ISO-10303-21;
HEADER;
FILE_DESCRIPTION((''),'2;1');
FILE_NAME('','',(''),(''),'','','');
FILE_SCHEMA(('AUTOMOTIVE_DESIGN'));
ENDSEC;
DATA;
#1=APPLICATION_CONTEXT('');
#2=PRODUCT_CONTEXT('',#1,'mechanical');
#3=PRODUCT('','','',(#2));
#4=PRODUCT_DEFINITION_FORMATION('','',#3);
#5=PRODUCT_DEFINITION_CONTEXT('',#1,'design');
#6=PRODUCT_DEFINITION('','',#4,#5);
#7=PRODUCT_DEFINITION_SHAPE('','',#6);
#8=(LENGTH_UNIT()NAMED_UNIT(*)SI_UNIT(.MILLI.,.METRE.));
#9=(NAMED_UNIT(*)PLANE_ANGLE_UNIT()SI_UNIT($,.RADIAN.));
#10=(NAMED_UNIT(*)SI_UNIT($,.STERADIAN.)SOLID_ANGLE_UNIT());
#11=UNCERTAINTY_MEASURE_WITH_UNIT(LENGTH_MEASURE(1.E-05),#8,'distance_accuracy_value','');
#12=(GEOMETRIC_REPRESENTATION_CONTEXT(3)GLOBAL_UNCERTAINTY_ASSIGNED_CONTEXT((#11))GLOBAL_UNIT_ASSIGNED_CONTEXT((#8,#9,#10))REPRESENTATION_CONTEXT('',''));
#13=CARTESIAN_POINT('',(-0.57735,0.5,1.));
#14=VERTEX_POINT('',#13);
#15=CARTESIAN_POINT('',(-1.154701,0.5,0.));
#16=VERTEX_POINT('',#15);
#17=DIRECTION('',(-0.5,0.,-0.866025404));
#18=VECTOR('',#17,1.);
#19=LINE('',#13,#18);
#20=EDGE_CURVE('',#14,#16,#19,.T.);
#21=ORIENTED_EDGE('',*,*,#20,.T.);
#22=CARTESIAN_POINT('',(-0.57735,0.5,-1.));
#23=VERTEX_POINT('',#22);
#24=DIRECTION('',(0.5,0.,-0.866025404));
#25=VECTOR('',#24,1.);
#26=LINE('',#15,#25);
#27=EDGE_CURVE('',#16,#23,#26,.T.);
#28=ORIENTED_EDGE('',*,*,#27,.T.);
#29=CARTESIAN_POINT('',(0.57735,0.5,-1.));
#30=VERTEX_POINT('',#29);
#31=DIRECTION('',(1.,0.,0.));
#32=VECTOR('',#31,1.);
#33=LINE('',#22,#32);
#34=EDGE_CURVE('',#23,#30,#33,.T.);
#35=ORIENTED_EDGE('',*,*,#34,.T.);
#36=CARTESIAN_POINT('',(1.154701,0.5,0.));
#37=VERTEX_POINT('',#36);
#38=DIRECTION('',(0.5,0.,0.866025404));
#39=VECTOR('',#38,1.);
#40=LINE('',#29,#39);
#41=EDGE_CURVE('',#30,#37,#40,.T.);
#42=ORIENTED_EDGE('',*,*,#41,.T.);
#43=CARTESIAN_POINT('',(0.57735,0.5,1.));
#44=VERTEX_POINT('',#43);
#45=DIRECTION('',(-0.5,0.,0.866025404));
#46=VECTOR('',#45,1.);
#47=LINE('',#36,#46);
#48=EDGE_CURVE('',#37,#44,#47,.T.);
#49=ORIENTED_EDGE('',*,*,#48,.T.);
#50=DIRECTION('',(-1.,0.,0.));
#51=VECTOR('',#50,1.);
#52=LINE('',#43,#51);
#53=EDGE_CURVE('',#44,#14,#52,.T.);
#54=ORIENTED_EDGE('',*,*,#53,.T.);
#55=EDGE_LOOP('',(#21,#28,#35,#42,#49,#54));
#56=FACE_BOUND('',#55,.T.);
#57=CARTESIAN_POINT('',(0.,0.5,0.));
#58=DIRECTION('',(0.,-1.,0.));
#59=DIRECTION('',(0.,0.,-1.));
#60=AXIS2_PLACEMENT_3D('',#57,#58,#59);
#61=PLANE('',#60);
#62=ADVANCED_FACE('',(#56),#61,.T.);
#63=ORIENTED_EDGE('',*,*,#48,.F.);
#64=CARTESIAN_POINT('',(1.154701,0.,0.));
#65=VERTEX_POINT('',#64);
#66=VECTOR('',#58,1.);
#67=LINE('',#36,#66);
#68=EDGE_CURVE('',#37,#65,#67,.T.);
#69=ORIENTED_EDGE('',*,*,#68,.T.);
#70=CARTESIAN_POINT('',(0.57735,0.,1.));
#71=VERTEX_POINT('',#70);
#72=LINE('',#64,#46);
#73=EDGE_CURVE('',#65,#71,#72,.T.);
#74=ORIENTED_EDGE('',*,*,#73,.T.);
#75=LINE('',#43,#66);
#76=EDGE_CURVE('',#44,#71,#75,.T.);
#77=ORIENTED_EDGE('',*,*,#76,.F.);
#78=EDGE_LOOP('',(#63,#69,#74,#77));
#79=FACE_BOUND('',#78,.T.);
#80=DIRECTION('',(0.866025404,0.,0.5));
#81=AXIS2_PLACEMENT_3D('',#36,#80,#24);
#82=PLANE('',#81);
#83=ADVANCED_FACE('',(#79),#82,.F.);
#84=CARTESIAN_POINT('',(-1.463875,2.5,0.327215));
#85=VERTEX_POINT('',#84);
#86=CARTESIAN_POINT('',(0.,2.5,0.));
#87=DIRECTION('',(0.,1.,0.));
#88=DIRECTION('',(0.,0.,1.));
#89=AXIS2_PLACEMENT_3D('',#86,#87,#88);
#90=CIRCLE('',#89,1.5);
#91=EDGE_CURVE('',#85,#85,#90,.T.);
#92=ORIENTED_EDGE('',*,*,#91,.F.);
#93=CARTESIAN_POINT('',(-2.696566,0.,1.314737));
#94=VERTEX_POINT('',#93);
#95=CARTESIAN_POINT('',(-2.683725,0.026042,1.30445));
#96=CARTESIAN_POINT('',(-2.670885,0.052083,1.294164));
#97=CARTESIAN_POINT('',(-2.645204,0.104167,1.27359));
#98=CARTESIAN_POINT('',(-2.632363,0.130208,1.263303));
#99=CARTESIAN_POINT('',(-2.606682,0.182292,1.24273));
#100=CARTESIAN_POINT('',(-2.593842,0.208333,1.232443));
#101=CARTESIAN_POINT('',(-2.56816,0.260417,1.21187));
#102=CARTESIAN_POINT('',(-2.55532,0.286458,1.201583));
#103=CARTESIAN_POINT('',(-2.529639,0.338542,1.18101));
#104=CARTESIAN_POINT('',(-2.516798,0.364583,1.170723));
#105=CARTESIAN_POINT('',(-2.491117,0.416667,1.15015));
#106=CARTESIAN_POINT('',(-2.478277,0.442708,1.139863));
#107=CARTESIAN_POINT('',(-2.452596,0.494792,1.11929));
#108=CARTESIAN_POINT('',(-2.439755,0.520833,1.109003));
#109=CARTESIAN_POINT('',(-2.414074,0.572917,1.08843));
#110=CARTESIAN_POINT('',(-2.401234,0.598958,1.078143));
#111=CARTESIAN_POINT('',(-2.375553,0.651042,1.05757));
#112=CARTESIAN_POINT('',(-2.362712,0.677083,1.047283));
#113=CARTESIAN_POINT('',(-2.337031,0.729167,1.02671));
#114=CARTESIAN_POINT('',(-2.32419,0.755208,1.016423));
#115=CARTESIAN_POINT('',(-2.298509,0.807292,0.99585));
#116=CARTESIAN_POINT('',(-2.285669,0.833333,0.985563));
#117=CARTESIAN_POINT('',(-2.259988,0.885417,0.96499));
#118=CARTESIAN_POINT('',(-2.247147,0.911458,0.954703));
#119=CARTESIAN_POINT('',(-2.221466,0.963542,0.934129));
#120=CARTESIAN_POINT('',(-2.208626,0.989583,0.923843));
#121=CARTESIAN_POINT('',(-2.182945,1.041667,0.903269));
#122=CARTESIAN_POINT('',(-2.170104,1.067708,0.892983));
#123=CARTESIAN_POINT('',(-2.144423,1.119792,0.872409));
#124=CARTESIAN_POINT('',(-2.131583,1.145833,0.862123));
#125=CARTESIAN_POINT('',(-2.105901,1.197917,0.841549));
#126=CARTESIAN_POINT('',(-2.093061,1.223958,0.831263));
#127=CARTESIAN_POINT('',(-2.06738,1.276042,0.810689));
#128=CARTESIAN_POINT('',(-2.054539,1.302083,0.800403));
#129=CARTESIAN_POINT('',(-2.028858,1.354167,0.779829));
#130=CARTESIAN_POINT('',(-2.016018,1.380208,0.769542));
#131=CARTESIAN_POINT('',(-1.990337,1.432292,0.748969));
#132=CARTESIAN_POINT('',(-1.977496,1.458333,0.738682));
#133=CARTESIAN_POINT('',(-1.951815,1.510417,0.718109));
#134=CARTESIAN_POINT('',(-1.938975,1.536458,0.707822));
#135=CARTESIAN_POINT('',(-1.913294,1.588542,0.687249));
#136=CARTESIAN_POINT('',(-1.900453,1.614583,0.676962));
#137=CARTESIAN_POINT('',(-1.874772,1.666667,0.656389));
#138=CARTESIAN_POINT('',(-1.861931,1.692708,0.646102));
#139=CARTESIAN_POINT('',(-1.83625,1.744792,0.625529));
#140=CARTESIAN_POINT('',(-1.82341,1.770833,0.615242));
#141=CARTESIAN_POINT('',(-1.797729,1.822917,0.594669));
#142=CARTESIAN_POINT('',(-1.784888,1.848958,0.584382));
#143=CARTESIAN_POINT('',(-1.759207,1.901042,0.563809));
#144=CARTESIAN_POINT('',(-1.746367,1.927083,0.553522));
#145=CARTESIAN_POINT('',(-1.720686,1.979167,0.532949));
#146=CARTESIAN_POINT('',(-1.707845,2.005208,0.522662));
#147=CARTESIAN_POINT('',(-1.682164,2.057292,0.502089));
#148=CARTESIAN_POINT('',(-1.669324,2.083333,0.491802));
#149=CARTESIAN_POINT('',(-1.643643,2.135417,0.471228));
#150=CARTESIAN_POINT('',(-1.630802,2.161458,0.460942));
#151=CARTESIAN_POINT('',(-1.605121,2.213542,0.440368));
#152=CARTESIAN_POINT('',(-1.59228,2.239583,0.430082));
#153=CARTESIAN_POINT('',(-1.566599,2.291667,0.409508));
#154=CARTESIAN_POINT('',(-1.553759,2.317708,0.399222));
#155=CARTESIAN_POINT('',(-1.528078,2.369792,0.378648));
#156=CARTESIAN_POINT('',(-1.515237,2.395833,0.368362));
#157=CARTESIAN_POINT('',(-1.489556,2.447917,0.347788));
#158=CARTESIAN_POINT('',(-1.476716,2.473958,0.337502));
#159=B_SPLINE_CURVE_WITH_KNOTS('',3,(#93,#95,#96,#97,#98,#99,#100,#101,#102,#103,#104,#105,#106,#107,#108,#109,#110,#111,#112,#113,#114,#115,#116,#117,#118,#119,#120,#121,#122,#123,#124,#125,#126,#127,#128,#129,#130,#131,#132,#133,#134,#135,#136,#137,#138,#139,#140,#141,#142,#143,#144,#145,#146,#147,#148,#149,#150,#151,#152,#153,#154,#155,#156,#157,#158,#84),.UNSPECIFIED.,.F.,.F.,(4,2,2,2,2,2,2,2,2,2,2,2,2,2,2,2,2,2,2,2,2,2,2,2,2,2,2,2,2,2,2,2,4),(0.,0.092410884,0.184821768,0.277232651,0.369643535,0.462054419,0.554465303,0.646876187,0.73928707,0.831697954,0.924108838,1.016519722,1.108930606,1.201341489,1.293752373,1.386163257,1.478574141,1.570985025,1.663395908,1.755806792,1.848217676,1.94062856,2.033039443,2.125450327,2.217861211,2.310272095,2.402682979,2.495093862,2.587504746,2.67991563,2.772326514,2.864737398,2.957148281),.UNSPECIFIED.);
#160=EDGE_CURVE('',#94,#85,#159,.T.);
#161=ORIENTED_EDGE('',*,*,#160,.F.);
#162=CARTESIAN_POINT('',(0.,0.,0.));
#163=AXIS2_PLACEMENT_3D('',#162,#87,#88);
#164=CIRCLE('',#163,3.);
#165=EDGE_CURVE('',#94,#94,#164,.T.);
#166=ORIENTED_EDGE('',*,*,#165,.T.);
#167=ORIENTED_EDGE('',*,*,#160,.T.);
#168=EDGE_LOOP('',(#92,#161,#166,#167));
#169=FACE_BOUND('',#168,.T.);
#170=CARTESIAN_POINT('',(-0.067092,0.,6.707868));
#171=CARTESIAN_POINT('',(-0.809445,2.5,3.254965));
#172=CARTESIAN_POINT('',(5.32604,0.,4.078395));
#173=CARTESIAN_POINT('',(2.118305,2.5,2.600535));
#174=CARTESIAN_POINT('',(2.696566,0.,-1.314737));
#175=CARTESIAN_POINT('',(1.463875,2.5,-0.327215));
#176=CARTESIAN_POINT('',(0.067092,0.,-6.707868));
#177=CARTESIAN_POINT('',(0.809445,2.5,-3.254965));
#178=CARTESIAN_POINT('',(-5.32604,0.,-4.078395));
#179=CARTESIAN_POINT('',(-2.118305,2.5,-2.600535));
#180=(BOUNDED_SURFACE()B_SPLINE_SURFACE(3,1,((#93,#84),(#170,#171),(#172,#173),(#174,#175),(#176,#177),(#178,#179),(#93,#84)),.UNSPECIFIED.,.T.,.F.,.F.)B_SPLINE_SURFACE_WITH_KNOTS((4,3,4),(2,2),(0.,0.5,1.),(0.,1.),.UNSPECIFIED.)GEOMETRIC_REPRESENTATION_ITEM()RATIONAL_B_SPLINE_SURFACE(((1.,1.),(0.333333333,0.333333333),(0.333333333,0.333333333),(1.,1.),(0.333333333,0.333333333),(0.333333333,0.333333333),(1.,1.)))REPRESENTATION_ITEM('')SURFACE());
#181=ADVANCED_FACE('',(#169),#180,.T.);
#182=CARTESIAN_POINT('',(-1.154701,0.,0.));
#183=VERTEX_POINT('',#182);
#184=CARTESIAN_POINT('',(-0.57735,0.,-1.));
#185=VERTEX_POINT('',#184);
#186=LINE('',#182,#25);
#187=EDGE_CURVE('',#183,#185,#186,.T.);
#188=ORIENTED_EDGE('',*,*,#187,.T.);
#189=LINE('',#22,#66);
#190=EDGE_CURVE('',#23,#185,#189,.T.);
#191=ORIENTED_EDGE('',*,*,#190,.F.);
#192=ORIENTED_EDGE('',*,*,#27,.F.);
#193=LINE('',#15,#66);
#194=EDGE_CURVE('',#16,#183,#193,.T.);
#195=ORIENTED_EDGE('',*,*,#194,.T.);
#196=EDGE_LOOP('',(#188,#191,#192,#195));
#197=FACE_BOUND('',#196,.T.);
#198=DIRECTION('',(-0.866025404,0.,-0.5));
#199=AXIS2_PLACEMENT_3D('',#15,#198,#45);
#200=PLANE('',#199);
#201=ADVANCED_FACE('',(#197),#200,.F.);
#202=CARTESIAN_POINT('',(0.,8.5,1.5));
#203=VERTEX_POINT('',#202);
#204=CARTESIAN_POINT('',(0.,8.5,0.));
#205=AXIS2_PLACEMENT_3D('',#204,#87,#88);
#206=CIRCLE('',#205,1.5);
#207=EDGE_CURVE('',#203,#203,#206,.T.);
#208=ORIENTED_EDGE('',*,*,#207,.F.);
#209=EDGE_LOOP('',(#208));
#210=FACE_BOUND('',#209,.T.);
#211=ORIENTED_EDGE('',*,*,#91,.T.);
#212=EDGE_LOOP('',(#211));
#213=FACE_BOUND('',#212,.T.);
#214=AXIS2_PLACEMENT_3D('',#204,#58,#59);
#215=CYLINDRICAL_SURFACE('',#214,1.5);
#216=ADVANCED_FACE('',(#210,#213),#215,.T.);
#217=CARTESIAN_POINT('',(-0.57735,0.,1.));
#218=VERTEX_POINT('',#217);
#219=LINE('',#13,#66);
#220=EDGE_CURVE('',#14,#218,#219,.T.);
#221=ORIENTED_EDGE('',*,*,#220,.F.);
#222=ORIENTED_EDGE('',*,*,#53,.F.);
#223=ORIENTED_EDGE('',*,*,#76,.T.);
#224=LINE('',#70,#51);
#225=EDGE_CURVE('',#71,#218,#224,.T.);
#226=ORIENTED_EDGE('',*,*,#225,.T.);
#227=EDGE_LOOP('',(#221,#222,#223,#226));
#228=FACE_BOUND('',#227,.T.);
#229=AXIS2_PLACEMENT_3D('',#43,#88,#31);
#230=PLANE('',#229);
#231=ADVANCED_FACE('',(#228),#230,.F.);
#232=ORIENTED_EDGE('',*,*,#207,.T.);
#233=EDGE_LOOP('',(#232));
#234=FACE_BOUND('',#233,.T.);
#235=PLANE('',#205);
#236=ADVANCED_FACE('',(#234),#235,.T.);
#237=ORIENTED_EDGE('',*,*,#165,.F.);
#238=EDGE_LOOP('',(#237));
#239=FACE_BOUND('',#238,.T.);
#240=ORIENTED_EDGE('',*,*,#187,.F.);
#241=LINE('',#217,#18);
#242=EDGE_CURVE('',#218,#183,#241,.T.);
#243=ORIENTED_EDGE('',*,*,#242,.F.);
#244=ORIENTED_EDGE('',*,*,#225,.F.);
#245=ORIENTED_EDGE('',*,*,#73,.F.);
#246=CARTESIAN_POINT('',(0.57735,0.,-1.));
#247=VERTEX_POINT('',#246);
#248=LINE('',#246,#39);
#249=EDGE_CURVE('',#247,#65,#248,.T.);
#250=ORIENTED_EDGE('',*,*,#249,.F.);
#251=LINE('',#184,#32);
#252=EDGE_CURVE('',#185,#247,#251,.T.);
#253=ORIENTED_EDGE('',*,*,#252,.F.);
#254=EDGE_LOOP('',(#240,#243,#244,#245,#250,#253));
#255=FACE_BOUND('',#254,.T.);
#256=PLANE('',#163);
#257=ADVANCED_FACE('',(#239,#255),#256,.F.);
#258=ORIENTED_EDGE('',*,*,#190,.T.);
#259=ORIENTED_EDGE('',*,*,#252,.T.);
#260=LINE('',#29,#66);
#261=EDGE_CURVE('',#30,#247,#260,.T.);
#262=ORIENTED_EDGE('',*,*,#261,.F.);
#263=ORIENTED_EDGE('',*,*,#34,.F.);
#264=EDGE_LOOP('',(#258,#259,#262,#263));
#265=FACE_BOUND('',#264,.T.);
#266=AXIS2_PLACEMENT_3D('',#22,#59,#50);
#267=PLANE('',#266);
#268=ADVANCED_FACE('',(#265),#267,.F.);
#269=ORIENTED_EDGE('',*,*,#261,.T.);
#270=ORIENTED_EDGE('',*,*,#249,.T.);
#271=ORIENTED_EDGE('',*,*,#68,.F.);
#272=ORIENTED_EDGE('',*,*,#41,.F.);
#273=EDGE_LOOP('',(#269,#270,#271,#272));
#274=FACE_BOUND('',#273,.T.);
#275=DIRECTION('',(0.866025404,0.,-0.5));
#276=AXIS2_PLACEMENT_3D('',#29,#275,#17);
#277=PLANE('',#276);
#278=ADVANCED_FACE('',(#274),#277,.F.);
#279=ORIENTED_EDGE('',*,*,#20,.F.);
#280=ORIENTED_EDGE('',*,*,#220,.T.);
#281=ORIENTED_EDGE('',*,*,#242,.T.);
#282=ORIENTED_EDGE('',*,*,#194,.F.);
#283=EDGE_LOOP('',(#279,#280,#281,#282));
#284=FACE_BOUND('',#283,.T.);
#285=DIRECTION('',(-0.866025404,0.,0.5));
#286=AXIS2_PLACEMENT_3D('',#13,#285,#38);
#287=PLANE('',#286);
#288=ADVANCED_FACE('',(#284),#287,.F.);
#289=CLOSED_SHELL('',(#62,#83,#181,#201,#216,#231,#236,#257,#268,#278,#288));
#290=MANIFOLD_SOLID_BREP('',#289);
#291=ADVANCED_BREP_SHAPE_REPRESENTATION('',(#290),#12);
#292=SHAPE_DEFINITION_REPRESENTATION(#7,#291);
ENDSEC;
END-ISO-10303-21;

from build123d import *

# Parameters (mm, degrees)
SKETCH_3_R          = 1.5
EXTRUDE_1_DEPTH     = 6
CUT_EXTRUDE_1_DEPTH = 0.5


with BuildPart() as part:
    # 放样1: read off the stored shape, not the designer's step
    # 放样1: loft between two sections, ruled curve by curve
    loft_1_from = [
        Edge.make_bspline([(-2.696565737, 0, 1.314736942), (-0.067091854, 0, 6.707868416), (5.32603962, 0, 4.078394533), (2.696565737, 0, -1.314736942), (0.067091854, 0, -6.707868416), (-5.32603962, 0, -4.078394533), (-2.696565737, 0, 1.314736942)], [0, 0, 0, 0, 0.5, 0.5, 0.5, 1, 1, 1, 1], 3, [1, 0.333333333, 0.333333333, 1, 0.333333333, 0.333333333, 1]),
    ]
    loft_1_to = [
        Edge.make_bspline([(-1.463875143, 2.5, 0.327214862), (-0.809445419, 2.5, 3.254965148), (2.118304867, 2.5, 2.600535424), (1.463875143, 2.5, -0.327214862), (0.809445419, 2.5, -3.254965148), (-2.118304867, 2.5, -2.600535424), (-1.463875143, 2.5, 0.327214862)], [0, 0, 0, 0, 0.5, 0.5, 0.5, 1, 1, 1, 1], 3, [1, 0.333333333, 0.333333333, 1, 0.333333333, 0.333333333, 1]),
    ]
    loft_1 = Solid(Shell([*[Face.make_surface_from_curves(loft_1_from[k], loft_1_to[k]) for k in range(1)], Face(Wire(loft_1_from)), Face(Wire(loft_1_to))]))
    add(loft_1)

    # 草图3 → 凸台-拉伸1 (add)
    with BuildSketch(Plane(origin=(0, 2.5, 0), x_dir=(1, 0, 0), z_dir=(0, 1, 0))):
        with Locations(Location((0, 0, 0), (0, 0, 192.6))):
            Circle(SKETCH_3_R)
    extrude(amount=EXTRUDE_1_DEPTH)

    # 草图4 → 切除-拉伸1 (cut)
    with BuildSketch(Plane.XZ):
        Polygon((0.577350269, 1), (-0.577350269, 1), (-1.154700538, 0), (-0.577350269, -1), (0.577350269, -1), (1.154700538, 0), align=None)
    extrude(amount=-CUT_EXTRUDE_1_DEPTH, mode=Mode.SUBTRACT)


solid = part.part
